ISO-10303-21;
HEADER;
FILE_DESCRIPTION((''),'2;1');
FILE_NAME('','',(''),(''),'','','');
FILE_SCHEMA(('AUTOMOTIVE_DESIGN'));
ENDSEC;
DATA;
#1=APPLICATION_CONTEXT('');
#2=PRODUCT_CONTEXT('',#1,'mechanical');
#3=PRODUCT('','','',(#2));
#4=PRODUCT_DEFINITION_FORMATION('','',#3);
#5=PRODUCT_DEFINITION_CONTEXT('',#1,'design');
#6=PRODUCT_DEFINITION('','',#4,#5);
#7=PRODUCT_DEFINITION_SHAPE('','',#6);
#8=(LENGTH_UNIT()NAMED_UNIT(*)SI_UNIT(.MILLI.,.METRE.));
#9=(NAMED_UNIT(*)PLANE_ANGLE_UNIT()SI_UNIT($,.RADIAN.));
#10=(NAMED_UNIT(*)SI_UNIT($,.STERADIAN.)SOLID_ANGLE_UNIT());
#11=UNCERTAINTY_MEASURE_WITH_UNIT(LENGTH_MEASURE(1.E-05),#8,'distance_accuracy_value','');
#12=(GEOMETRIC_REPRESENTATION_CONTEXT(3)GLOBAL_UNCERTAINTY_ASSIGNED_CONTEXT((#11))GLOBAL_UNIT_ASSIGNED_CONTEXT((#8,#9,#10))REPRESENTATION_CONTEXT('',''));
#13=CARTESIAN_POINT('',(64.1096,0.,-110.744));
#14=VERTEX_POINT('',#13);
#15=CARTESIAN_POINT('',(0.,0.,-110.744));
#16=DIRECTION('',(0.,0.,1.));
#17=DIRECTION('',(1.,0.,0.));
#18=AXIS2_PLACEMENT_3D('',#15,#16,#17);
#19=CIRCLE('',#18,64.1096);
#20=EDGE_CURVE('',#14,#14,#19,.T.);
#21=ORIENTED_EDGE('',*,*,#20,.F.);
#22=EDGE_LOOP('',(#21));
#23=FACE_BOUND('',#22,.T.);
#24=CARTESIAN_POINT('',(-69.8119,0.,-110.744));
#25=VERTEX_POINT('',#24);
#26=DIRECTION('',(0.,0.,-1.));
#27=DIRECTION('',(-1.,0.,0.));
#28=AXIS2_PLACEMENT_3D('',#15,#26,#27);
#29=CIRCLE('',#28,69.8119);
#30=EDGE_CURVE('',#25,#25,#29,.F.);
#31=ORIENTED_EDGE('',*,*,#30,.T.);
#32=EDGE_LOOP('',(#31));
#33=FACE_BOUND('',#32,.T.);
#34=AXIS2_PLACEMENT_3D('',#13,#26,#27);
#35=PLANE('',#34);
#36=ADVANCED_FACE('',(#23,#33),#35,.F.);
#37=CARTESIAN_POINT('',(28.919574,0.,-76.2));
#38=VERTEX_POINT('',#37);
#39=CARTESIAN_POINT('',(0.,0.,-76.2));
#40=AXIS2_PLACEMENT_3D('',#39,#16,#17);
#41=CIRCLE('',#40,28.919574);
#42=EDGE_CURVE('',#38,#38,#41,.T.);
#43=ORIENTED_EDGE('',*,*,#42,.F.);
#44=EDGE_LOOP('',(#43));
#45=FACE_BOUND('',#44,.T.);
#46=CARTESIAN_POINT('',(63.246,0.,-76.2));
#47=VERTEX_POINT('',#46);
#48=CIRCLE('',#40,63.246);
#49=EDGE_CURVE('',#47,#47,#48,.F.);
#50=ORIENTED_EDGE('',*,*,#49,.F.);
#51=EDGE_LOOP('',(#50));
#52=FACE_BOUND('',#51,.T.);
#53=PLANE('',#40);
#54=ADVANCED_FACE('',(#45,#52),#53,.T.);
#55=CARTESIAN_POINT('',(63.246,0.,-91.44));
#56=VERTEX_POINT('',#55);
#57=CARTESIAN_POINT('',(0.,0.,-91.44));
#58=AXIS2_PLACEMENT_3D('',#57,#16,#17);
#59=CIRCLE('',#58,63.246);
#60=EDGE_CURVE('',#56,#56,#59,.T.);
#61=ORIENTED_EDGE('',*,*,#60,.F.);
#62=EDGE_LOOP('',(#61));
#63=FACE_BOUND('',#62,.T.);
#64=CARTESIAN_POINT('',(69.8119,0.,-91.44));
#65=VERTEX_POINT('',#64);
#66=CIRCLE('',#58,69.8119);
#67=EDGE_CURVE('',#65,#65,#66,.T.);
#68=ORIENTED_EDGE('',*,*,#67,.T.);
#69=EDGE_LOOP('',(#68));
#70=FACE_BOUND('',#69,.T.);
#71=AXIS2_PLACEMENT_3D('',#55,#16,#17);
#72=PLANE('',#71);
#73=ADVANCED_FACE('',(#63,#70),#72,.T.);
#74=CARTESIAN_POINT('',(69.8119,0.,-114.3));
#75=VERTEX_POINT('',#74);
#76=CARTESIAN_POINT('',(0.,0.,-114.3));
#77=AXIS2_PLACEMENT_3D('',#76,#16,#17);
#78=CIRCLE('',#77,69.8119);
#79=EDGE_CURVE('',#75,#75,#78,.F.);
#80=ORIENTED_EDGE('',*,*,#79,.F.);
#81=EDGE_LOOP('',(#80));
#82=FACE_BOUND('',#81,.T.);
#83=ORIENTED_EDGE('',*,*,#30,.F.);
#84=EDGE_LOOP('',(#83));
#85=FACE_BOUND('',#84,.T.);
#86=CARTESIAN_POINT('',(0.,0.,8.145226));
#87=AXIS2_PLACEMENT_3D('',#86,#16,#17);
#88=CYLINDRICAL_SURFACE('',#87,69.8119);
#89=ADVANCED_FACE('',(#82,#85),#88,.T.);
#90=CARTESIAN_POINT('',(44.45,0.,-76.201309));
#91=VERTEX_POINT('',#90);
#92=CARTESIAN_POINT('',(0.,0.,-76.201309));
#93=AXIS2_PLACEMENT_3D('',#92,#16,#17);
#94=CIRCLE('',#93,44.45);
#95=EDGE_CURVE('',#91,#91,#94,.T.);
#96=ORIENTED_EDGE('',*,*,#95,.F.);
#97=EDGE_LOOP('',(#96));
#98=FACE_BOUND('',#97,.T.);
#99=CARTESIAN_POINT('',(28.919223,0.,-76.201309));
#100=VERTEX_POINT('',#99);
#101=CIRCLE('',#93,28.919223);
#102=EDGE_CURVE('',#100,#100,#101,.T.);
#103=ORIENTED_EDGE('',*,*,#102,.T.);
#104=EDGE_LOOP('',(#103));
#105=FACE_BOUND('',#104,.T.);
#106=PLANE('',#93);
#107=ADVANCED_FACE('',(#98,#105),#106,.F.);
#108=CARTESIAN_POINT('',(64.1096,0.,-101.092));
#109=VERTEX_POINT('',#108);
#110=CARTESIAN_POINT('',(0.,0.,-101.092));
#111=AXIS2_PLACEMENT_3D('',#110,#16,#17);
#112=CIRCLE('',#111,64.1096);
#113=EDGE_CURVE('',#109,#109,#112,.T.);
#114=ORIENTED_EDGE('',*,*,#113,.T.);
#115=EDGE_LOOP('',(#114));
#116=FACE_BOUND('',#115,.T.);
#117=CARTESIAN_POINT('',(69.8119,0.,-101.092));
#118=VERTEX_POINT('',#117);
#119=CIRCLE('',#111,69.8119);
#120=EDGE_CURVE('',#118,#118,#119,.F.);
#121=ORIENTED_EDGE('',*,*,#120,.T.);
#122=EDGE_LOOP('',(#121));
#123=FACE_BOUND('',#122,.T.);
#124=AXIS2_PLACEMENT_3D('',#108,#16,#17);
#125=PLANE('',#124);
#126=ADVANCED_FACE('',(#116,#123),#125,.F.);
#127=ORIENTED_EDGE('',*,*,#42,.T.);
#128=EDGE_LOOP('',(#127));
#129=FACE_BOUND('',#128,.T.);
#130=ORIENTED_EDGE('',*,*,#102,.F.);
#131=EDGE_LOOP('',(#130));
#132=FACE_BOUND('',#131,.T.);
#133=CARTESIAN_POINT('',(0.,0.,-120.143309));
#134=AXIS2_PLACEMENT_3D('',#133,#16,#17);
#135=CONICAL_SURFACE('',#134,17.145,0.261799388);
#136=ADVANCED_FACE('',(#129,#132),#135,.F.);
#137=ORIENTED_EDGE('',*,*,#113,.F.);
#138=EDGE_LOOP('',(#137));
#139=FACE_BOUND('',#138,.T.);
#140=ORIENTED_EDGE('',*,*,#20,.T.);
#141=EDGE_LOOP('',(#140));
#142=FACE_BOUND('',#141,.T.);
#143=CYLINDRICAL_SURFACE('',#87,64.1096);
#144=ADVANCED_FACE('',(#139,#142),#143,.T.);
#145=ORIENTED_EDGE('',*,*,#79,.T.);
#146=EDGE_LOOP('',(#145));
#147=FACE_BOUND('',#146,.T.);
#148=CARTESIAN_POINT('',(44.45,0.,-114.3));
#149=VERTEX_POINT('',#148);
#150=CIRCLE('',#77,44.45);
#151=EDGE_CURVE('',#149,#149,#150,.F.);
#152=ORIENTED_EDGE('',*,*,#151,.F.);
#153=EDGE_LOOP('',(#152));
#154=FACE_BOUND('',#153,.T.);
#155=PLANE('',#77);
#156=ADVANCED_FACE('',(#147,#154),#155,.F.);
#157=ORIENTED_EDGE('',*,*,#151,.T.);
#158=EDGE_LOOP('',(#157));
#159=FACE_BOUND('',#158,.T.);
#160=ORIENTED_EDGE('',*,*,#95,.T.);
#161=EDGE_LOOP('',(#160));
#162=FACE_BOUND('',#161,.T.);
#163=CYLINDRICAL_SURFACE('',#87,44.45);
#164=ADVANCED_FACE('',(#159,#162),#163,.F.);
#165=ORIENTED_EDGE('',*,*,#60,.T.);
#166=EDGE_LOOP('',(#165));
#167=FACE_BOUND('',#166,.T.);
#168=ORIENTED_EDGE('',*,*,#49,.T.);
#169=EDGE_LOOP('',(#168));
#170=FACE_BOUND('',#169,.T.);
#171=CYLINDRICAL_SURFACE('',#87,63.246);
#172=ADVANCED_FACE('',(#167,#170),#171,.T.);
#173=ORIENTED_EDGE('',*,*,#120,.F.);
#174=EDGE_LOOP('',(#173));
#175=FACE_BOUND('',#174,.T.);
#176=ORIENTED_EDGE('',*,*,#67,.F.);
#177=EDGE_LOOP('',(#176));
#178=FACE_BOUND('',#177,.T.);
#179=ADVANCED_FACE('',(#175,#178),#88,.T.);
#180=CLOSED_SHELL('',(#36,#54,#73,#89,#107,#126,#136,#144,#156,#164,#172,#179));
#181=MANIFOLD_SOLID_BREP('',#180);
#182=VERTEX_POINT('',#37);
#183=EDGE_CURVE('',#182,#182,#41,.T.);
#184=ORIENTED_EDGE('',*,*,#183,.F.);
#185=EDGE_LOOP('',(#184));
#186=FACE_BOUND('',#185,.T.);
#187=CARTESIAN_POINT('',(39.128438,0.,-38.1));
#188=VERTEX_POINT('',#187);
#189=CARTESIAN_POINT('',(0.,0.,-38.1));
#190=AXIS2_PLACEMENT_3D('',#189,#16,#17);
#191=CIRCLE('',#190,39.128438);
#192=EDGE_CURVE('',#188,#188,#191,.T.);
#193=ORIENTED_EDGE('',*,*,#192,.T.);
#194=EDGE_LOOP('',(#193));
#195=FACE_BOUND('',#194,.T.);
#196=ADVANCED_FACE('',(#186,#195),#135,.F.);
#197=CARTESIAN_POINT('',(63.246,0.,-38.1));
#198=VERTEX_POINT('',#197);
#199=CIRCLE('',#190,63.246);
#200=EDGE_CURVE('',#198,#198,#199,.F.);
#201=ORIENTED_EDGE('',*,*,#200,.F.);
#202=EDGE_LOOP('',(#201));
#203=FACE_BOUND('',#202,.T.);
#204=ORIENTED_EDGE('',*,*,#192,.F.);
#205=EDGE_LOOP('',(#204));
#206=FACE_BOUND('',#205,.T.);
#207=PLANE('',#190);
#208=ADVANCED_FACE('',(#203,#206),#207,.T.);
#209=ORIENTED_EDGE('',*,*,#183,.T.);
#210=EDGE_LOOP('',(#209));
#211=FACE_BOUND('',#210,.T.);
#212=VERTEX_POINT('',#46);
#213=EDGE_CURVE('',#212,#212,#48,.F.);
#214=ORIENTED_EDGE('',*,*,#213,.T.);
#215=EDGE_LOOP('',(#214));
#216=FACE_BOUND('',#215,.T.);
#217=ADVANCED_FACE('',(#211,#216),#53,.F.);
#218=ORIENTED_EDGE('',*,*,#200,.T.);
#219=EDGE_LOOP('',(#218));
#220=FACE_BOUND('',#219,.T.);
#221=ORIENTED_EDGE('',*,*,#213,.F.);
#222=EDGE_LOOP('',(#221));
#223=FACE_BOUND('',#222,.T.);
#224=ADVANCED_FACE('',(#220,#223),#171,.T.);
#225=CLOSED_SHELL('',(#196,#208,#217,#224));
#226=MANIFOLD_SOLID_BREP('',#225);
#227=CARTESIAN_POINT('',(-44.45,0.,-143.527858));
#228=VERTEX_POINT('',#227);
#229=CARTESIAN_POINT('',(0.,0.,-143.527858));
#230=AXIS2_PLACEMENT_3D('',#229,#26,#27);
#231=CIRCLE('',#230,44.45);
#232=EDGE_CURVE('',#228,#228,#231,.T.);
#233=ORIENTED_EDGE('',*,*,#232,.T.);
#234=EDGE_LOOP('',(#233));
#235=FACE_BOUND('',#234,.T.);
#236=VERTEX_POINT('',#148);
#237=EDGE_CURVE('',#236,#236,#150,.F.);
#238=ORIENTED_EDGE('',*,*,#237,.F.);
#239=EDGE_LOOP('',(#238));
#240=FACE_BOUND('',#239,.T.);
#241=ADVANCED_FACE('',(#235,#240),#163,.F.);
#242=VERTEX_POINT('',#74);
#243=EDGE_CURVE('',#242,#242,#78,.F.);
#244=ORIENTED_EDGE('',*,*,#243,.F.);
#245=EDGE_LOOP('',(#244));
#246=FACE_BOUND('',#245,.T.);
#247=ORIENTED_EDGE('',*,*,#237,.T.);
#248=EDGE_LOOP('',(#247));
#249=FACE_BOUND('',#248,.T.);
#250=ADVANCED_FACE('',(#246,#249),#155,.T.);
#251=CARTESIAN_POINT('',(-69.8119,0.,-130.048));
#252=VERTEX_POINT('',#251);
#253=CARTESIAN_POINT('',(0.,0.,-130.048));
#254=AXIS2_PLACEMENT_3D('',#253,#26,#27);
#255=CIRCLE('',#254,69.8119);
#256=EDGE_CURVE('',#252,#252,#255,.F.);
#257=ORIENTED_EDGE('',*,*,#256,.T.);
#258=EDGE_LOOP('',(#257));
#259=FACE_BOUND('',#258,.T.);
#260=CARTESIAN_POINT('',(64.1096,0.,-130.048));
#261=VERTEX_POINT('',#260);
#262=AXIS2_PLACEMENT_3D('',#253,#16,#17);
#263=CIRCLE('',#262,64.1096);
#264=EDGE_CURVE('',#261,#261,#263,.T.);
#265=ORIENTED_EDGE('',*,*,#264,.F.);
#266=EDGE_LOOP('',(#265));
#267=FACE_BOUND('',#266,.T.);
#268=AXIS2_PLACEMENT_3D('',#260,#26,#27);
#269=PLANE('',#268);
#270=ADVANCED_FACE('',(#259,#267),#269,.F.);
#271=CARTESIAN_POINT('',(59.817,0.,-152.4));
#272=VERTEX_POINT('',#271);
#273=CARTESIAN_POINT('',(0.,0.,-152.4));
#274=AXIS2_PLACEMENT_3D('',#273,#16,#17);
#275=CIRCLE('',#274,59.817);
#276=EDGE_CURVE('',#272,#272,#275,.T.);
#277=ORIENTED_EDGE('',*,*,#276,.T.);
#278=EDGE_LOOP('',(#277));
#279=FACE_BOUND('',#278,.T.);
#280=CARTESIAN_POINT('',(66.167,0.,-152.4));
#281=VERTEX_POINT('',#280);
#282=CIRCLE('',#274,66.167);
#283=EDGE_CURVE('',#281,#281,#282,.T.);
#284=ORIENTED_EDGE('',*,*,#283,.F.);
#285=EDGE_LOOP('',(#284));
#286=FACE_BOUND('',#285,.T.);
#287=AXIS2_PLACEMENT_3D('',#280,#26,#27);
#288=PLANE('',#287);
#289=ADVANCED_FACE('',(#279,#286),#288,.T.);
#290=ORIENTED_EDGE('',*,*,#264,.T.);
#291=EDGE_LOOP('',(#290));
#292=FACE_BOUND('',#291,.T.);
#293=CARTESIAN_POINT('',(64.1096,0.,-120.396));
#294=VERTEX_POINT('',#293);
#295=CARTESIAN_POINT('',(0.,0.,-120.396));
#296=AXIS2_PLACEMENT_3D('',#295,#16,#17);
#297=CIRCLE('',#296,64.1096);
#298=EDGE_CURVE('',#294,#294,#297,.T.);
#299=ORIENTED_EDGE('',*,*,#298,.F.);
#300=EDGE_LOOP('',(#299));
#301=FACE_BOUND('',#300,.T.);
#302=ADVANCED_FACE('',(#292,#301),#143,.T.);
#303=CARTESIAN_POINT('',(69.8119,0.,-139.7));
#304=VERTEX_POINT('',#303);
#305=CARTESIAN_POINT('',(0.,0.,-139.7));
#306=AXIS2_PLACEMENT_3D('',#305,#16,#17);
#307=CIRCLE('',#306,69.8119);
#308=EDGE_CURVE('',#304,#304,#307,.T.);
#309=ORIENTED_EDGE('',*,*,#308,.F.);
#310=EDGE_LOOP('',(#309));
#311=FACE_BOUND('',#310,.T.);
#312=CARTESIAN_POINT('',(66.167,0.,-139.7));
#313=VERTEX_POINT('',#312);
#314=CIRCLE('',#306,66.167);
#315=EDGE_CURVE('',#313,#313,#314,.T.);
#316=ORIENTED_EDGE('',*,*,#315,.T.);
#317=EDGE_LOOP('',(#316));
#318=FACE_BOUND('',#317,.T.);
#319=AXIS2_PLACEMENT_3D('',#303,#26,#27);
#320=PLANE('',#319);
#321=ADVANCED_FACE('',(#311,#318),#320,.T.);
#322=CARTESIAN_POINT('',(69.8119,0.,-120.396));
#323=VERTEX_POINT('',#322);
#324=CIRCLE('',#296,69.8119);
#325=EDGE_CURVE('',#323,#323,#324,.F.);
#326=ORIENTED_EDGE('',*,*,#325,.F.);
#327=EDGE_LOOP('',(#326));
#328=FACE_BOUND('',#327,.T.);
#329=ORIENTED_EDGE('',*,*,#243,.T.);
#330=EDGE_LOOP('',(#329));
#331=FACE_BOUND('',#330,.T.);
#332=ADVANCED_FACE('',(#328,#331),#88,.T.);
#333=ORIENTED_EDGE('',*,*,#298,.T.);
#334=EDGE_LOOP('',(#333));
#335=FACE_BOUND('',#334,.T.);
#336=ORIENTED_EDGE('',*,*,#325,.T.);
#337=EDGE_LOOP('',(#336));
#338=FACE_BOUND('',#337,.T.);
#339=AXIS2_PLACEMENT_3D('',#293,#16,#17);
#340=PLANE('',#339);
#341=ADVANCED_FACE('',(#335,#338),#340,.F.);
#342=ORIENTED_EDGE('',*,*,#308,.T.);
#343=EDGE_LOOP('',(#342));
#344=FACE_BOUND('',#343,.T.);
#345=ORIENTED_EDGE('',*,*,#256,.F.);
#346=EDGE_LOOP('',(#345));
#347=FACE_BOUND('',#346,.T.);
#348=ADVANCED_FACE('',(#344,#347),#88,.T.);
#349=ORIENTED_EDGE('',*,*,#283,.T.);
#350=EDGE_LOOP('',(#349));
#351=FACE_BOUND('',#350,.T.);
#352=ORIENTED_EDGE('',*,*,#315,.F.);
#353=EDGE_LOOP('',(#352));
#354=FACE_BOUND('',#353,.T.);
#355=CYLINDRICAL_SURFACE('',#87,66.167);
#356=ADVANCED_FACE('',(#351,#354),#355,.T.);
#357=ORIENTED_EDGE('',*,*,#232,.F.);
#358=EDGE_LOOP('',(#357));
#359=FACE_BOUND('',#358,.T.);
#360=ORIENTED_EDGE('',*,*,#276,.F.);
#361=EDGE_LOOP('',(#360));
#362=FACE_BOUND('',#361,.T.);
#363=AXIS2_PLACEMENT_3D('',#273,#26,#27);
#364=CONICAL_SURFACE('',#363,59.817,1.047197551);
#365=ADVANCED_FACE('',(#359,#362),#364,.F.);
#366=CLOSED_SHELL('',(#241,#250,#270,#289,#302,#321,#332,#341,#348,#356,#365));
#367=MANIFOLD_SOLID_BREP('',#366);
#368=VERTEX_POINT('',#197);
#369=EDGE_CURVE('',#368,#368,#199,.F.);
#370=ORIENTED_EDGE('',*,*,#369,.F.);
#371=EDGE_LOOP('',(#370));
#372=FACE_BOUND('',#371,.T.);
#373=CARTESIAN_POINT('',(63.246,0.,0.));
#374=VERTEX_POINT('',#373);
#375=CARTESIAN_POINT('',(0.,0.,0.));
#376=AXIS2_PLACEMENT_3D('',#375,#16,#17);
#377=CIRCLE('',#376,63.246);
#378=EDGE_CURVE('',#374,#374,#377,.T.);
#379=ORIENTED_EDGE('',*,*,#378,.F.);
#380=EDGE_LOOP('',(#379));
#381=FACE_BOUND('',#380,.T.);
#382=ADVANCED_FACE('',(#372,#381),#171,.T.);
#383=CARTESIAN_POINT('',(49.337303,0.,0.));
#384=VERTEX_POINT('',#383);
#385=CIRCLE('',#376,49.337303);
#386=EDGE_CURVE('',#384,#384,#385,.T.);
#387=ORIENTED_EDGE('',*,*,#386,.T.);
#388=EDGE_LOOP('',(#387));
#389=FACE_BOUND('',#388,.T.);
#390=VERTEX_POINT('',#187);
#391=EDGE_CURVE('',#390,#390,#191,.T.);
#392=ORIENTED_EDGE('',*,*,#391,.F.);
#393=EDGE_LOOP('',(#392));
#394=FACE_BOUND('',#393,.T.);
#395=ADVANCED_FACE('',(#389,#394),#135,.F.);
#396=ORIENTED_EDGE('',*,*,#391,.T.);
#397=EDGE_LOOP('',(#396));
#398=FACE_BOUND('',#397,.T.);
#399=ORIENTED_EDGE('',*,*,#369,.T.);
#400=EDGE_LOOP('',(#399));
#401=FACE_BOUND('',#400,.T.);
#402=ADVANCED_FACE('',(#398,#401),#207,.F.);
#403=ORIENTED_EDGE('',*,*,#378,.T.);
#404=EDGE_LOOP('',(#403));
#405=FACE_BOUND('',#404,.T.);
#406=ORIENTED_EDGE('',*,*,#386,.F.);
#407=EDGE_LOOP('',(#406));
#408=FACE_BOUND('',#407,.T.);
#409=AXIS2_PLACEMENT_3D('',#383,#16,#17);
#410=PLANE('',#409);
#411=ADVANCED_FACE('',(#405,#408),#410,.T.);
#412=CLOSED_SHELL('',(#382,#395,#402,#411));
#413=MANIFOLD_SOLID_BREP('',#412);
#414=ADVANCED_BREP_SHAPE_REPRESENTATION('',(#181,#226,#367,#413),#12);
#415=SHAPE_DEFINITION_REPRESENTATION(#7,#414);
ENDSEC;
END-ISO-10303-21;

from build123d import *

# Parameters (mm, degrees)
SKETCH2_W        = 6.35
SKETCH2_H        = 9.652
SKETCH3_W        = 44.45
SKETCH3_H        = 76.198690687
SPLIT1_START     = -114.3
SPLIT1_OUTLINE_R = 69.8119
SPLIT1_DEPTH     = 114.3


# Read off the part's stored shape, not the designer's step: Split1
with BuildPart() as part:
    # Sketch1 → Revolve1 (revolve)
    with BuildSketch(Plane(origin=(0, 0, 0), x_dir=(1, 0, 0), z_dir=(0, 1, 0))):
        Polygon((69.8119, 139.7), (69.8119, 91.44), (63.246, 91.44), (63.246, 0), (49.337302706, 0), (17.145, 120.143309313), (17.145, 127.763309313), (59.817, 152.4), (66.167, 152.4), (66.167, 139.7), align=None)
    revolve(axis=Axis((0, 0, 8.145225657), (0, 0, -1)))

    # Sketch2 → Cut-Revolve1 (revolve, cut)
    with BuildSketch(Plane(origin=(0, 0, 0), x_dir=(1, 0, 0), z_dir=(0, 1, 0))):
        with Locations((67.2846, 125.222)):
            Rectangle(SKETCH2_W, SKETCH2_H)
        with Locations((67.2846, 105.918)):
            Rectangle(SKETCH2_W, SKETCH2_H)
    revolve(axis=Axis((0, 0, 8.145225657), (0, 0, -1)), mode=Mode.SUBTRACT)

    # Sketch3 → Cut-Revolve2 (revolve, cut)
    with BuildSketch(Plane(origin=(0, 0, 0), x_dir=(1, 0, 0), z_dir=(0, 1, 0))):
        with Locations((22.225, 114.300654657)):
            Rectangle(SKETCH3_W, SKETCH3_H)
    revolve(axis=Axis((0, 0, 8.145225657), (0, 0, -1)), mode=Mode.SUBTRACT)

    # Split1 outline → Split1 (cut)
    with BuildSketch(Plane.XY.offset(SPLIT1_START)):
        Circle(SPLIT1_OUTLINE_R)
    extrude(amount=SPLIT1_DEPTH, mode=Mode.SUBTRACT)


with BuildPart() as body_2:
    # Split1 2 outline → Split1 2 (revolve)
    with BuildSketch(Plane.XZ):
        Polygon((39.128438475, -38.1), (28.919574243, -76.2), (63.246, -76.2), (63.246, -38.1), align=None)
    revolve(axis=Axis((0, 0, 0), (0, 0, 1)))


with BuildPart() as body_3:
    # Split1 3 outline → Split1 3 (revolve)
    with BuildSketch(Plane.XZ):
        Polygon((49.337302706, 0), (39.128438475, -38.1), (63.246, -38.1), (63.246, 0), align=None)
    revolve(axis=Axis((0, 0, 0), (0, 0, 1)))


with BuildPart() as body_4:
    # Split1 4 outline → Split1 4 (revolve)
    with BuildSketch(Plane.XZ):
        Polygon((44.45, -76.201309313), (44.45, -114.3), (69.8119, -114.3), (69.8119, -110.744), (64.1096, -110.744), (64.1096, -101.092), (69.8119, -101.092), (69.8119, -91.44), (63.246, -91.44), (63.246, -76.2), (28.919574243, -76.2), (28.919223414, -76.201309313), align=None)
    revolve(axis=Axis((0, 0, 0), (0, 0, 1)))


solid = Compound([part.part, body_2.part, body_3.part, body_4.part])
